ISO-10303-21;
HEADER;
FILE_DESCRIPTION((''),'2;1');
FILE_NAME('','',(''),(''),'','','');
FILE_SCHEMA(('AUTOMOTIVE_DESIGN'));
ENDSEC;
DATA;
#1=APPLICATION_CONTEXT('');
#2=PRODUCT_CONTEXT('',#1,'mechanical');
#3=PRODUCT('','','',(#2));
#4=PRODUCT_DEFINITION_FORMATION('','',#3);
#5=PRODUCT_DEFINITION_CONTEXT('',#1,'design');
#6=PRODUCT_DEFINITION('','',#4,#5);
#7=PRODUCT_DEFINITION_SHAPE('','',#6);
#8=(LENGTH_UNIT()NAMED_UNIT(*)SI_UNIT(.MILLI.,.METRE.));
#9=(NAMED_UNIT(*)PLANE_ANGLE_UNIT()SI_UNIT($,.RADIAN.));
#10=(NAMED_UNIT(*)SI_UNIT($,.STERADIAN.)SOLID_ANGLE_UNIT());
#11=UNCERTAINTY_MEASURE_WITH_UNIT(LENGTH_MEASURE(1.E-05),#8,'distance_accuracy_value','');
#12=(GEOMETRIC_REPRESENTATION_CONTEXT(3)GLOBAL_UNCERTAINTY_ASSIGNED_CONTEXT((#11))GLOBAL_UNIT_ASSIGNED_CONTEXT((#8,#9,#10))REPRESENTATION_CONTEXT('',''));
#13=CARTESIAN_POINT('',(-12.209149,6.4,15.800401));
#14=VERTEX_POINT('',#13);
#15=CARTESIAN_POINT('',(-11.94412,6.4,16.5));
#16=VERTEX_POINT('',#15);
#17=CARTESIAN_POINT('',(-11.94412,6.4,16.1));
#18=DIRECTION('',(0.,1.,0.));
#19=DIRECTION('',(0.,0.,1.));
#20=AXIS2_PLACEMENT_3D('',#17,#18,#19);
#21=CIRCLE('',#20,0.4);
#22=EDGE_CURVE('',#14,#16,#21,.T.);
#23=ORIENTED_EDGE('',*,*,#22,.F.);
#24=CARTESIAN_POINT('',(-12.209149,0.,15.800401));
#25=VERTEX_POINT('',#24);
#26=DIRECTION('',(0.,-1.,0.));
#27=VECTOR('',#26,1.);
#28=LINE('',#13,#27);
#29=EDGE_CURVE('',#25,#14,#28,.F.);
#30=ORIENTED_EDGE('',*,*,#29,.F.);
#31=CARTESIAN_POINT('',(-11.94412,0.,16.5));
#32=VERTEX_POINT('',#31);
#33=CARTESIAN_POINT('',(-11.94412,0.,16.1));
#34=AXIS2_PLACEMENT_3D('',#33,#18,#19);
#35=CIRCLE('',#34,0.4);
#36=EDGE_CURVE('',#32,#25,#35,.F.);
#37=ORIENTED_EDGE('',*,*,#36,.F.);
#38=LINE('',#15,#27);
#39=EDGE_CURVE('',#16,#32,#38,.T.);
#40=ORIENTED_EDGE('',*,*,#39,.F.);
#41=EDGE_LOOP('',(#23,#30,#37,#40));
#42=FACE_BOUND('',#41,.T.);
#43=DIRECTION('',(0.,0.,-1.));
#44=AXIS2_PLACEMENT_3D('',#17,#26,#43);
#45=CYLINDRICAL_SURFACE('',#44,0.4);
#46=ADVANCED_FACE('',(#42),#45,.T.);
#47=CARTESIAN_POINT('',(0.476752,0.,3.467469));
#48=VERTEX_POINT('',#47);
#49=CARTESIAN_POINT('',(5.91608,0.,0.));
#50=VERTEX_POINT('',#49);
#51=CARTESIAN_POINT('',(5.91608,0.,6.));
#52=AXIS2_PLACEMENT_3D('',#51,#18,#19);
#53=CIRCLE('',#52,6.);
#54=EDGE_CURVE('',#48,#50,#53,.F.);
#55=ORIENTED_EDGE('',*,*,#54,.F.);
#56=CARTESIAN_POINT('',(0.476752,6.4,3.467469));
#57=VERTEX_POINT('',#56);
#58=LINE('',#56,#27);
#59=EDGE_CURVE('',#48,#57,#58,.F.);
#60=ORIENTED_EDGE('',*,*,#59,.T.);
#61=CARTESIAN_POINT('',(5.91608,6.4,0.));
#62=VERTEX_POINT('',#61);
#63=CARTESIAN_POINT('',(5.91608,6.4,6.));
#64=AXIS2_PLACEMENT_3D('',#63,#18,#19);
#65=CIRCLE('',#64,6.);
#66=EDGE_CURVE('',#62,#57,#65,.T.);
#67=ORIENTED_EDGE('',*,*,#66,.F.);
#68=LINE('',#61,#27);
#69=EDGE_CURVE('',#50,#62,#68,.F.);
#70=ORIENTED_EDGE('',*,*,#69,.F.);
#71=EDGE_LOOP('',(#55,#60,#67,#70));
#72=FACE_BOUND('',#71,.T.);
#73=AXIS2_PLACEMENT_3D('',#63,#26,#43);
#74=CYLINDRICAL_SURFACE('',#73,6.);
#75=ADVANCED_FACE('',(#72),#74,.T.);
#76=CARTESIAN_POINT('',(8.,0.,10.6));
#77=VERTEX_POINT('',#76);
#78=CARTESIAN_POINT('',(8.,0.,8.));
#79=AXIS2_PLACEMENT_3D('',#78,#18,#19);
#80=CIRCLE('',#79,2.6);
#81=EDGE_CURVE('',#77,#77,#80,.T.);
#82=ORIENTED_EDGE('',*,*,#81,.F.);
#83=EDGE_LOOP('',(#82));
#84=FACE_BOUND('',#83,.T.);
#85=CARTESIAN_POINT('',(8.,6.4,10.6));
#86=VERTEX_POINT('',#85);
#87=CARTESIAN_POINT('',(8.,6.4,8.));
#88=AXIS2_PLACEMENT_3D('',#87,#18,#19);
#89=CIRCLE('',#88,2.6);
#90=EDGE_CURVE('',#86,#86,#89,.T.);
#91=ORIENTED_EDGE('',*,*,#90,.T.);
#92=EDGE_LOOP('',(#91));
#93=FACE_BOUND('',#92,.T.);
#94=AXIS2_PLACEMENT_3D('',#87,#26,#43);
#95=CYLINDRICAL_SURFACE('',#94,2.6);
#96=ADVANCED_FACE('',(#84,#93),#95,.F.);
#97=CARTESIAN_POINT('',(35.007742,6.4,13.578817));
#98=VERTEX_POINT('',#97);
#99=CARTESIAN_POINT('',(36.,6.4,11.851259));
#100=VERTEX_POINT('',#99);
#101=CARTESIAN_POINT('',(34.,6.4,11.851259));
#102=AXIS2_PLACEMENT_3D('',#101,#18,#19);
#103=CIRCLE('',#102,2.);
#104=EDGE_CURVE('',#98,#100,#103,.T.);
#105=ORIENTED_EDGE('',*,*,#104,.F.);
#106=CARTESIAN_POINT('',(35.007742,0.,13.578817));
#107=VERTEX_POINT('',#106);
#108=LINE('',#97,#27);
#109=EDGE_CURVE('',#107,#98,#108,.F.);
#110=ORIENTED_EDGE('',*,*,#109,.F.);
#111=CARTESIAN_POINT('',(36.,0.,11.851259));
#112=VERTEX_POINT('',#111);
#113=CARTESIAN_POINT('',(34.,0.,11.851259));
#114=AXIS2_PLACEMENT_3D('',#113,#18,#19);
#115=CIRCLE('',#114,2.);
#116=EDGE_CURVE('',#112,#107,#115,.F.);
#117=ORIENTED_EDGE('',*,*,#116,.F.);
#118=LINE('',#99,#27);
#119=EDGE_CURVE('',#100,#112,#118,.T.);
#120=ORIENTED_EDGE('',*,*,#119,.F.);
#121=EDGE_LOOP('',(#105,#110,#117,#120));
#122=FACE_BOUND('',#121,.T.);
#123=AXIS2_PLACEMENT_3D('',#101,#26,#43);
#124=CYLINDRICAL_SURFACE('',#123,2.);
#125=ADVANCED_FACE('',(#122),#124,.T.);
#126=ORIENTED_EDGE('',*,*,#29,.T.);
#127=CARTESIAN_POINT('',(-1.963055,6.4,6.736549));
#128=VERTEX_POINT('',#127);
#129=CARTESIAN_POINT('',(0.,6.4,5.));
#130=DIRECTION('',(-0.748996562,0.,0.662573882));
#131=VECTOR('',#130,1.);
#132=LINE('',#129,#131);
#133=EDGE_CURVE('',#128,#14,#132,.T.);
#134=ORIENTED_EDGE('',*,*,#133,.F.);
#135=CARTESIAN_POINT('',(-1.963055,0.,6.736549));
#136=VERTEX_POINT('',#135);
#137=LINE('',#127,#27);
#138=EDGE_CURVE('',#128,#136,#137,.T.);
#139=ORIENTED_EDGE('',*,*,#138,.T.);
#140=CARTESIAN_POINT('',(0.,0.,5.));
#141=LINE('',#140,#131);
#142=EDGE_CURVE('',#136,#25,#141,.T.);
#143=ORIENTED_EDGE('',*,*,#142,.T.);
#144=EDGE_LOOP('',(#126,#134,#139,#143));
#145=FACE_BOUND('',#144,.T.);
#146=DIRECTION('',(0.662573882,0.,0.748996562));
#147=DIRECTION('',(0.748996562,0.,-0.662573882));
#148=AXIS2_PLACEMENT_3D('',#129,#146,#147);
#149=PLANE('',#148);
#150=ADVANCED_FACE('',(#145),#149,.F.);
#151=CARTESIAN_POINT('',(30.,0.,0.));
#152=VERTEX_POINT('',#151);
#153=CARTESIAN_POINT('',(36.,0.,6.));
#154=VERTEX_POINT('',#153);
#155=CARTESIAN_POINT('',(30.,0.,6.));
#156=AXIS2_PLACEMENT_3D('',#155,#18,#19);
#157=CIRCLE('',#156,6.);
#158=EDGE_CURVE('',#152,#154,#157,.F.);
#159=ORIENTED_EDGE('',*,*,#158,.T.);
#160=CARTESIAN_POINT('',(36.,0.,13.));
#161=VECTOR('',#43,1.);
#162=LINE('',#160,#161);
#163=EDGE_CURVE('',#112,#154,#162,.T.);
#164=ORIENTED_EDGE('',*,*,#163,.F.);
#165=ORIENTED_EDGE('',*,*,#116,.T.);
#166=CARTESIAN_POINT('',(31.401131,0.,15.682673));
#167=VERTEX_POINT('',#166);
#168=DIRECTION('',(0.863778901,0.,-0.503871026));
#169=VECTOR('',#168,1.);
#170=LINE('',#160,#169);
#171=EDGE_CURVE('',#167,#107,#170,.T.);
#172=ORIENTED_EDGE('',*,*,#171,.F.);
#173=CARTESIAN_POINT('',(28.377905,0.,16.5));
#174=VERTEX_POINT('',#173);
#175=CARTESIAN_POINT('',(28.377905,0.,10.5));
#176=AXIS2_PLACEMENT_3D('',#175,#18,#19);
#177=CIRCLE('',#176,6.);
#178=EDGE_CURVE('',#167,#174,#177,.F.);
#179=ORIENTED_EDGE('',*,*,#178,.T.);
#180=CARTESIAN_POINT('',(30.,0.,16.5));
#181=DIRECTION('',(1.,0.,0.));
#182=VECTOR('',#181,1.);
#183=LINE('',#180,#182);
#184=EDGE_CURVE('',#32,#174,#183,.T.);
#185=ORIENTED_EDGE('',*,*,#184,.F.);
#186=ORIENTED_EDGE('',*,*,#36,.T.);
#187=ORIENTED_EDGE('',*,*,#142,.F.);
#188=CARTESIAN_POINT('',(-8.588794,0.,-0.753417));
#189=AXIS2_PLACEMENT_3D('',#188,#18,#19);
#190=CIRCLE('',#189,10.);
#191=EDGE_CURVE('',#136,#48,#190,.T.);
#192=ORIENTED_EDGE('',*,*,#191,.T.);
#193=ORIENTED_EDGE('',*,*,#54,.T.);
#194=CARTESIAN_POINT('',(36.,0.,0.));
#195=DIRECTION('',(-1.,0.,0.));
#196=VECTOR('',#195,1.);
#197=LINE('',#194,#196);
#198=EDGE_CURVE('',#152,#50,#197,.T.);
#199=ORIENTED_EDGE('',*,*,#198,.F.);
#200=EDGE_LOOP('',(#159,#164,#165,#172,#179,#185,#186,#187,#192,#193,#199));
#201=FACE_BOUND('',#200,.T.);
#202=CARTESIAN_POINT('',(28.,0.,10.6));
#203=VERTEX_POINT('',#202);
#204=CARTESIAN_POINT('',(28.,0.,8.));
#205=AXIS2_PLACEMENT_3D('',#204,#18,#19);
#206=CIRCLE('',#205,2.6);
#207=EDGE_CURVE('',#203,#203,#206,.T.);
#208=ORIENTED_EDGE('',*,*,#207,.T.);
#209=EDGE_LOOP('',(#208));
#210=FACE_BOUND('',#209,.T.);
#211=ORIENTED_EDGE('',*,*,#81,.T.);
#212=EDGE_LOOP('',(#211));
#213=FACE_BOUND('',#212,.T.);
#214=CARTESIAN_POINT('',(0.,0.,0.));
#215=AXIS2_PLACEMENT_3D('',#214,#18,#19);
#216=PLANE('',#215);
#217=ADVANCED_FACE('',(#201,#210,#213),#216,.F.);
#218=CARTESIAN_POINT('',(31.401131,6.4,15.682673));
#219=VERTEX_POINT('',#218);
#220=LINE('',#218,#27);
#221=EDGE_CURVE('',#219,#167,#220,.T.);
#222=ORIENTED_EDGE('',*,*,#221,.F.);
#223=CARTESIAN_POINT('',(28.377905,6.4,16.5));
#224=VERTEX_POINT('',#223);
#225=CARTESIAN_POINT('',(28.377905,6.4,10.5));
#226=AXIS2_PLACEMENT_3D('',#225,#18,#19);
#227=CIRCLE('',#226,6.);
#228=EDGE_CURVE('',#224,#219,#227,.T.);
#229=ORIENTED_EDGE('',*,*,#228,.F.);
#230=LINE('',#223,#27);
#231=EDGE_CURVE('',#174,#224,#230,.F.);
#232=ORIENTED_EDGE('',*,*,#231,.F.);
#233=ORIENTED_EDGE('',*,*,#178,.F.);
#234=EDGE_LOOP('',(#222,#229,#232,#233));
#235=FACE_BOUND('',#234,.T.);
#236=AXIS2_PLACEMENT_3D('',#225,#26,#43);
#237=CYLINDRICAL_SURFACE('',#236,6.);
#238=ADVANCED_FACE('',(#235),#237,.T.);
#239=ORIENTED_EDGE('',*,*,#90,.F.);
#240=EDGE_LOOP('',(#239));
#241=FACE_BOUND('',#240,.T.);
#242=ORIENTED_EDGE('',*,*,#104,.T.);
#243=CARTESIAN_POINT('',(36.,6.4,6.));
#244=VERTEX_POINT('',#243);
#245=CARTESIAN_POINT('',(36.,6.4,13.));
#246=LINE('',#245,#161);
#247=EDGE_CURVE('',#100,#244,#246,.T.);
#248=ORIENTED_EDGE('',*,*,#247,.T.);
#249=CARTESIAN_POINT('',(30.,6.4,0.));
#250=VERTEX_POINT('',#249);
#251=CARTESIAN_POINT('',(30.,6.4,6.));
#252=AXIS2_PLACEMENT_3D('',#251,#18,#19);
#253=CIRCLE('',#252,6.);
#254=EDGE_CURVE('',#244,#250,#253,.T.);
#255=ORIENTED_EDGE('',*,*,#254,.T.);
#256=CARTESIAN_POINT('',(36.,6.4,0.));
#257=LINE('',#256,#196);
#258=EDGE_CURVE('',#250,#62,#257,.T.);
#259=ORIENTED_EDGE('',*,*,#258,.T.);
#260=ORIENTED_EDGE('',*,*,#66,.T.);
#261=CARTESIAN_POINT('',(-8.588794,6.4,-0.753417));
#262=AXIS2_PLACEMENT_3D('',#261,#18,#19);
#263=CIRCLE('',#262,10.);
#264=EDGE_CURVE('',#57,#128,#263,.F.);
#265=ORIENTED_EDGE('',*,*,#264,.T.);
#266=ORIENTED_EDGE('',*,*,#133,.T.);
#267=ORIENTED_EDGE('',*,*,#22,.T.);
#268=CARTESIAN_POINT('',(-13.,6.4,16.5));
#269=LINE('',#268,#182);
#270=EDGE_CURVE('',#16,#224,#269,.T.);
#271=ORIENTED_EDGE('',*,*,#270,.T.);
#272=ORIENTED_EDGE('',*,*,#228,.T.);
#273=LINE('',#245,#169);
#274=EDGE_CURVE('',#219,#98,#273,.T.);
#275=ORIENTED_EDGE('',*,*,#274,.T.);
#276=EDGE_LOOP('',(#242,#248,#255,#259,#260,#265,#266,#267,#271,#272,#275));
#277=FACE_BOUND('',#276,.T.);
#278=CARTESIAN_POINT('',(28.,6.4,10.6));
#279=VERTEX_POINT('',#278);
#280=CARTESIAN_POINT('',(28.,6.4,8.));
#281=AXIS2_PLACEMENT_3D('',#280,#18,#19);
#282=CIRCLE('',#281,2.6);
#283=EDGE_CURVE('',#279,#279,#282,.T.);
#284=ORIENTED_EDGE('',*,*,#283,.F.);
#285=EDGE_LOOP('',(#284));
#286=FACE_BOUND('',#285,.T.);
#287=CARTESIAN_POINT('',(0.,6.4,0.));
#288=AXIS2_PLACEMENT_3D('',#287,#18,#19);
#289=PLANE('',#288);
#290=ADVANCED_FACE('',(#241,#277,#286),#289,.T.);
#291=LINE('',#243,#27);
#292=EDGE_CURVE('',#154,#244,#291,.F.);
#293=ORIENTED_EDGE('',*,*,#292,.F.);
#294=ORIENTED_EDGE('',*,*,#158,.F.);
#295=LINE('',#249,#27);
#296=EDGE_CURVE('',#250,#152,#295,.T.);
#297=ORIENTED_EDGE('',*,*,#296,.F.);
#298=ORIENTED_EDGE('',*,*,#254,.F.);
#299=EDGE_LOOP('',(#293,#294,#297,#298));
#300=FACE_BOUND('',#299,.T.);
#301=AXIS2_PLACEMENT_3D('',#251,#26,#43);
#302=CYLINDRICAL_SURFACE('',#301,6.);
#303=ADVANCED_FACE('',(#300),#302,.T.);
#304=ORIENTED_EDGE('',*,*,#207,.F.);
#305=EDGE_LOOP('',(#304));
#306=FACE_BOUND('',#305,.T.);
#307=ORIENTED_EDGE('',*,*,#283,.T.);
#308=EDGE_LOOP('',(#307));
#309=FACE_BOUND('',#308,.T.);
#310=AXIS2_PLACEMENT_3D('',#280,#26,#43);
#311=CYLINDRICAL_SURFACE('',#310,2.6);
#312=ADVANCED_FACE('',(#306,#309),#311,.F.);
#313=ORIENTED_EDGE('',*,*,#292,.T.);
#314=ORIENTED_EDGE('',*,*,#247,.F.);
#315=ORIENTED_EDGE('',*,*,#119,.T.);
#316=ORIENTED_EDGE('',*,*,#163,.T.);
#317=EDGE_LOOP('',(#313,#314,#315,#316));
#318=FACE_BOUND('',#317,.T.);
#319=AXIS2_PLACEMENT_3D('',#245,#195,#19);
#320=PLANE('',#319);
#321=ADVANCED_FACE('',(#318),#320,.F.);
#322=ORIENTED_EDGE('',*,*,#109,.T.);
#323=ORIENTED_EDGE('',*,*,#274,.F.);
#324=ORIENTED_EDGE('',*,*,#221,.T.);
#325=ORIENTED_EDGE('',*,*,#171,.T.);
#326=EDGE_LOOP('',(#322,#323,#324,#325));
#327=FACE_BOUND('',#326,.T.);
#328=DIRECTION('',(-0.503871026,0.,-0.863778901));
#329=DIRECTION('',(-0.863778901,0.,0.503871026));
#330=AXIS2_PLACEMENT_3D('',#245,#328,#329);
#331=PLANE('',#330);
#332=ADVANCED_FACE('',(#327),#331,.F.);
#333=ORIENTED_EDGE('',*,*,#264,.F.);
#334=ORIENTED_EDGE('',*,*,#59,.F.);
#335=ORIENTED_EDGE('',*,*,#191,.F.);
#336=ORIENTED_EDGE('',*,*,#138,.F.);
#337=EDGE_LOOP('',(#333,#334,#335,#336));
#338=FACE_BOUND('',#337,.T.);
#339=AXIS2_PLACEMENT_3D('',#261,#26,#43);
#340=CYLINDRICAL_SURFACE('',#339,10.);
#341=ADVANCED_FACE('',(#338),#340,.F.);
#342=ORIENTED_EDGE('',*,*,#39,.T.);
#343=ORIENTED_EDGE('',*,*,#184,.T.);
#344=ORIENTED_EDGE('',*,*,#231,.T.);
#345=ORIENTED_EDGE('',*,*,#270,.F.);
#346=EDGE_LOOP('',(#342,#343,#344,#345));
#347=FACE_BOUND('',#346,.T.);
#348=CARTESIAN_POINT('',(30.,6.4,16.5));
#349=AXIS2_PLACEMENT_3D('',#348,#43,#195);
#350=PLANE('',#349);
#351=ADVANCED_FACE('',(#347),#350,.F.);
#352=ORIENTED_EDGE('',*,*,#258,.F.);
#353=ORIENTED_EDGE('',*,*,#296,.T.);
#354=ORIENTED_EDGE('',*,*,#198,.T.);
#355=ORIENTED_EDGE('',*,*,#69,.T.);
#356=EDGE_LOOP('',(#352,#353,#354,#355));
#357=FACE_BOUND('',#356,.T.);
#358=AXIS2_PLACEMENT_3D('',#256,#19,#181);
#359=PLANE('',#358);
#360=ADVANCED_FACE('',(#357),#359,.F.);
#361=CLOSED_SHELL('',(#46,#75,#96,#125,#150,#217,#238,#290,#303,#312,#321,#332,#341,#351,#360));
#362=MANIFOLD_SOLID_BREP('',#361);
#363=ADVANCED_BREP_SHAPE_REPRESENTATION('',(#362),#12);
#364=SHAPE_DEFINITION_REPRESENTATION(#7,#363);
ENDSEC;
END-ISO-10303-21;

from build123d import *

# Parameters (mm, degrees)
SKETCH1_R           = 2.6
BOSS_EXTRUDE1_DEPTH = 6.4
FILLET1_R           = 6
FILLET2_R           = 10
FILLET3_R           = 0.4
FILLET4_R           = 2


with BuildPart() as part:
    # Sketch1 → Boss-Extrude1 (new body)
    with BuildSketch(Plane(origin=(0, 0, 0), x_dir=(1, 0, 0), z_dir=(0, 1, 0))):
        Polygon((36, -13), (36, 0), (0, 0), (0, -5), (-13, -16.5), (-1.455462178, -16.5), (30, -16.5), align=None)
        with Locations(Location((28, -8, 0), (0, 0, 270))):
            Circle(SKETCH1_R, mode=Mode.SUBTRACT)
        with Locations(Location((8, -8, 0), (0, 0, 270))):
            Circle(SKETCH1_R, mode=Mode.SUBTRACT)
    extrude(amount=BOSS_EXTRUDE1_DEPTH)

    # Fillet1
    # the kernel refuses this fillet: 6 mm, written as the material it takes off along each edge
    with BuildSketch(Plane(origin=(30, -4.05523712, 16.5), x_dir=(-1, 0, 0), z_dir=(0, 1, 0))) as fillet1_piece_1:
        with BuildLine():
            CenterArc((FILLET1_R * 0.27034914135, -FILLET1_R), FILLET1_R, 90, 30.256437164)
            Line((-FILLET1_R * 0.233521884174, -FILLET1_R * 0.136221099102), (-FILLET1_R * 0.243599304685, -FILLET1_R * 0.118945521084))
            Line((-FILLET1_R * 0.243599304685, -FILLET1_R * 0.118945521084), (-FILLET1_R * 0.005406982827, FILLET1_R * 0.02))
            Line((-FILLET1_R * 0.005406982827, FILLET1_R * 0.02), (FILLET1_R * 0.27034914135, FILLET1_R * 0.02))
            Line((FILLET1_R * 0.27034914135, FILLET1_R * 0.02), (FILLET1_R * 0.27034914135, 0))
        make_face()
    extrude(amount=14.51047424, mode=Mode.SUBTRACT)
    with BuildSketch(Plane(origin=(36, -15, 0), x_dir=(0, 0, 1), z_dir=(0, 1, 0))) as fillet1_piece_2:
        with BuildLine():
            CenterArc((FILLET1_R, -FILLET1_R), FILLET1_R, 90, 90)
            Line((0, -FILLET1_R), (-FILLET1_R * 0.02, -FILLET1_R))
            Line((-FILLET1_R * 0.02, -FILLET1_R), (-FILLET1_R * 0.02, FILLET1_R * 0.02))
            Line((-FILLET1_R * 0.02, FILLET1_R * 0.02), (FILLET1_R, FILLET1_R * 0.02))
            Line((FILLET1_R, FILLET1_R * 0.02), (FILLET1_R, 0))
        make_face()
    extrude(amount=36.4, mode=Mode.SUBTRACT)
    with BuildSketch(Plane(origin=(0, -14.790199458, 0), x_dir=(0, 0, 1), z_dir=(0, 1, 0))) as fillet1_piece_3:
        with BuildLine():
            CenterArc((6, 5.916079783), FILLET1_R, 180, 80.405931773)
            Line((0, 5.916079783), (-0.12, 5.916079783))
            Line((-0.12, 5.916079783), (-0.12, 0))
            Line((-0.12, 0), (0, -0.12))
            ThreePointArc((0, -0.12), (2.5, -0.12), (4.98, -0.118321596))
            Line((4.98, -0.118321596), (5, 0))
        make_face()
    extrude(amount=35.980398916, mode=Mode.SUBTRACT)

    # Fillet2
    fillet2_edges = [part.edges().sort_by_distance(p)[0] for p in [
        (0, 3.2, 5),
    ]]
    fillet(fillet2_edges, radius=FILLET2_R)

    # Fillet3
    fillet3_edges = [part.edges().sort_by_distance(p)[0] for p in [
        (-13, 3.2, 16.5),
    ]]
    fillet(fillet3_edges, radius=FILLET3_R)

    # Fillet4
    fillet4_edges = [part.edges().sort_by_distance(p)[0] for p in [
        (36, 3.2, 13),
    ]]
    fillet(fillet4_edges, radius=FILLET4_R)


solid = part.part
